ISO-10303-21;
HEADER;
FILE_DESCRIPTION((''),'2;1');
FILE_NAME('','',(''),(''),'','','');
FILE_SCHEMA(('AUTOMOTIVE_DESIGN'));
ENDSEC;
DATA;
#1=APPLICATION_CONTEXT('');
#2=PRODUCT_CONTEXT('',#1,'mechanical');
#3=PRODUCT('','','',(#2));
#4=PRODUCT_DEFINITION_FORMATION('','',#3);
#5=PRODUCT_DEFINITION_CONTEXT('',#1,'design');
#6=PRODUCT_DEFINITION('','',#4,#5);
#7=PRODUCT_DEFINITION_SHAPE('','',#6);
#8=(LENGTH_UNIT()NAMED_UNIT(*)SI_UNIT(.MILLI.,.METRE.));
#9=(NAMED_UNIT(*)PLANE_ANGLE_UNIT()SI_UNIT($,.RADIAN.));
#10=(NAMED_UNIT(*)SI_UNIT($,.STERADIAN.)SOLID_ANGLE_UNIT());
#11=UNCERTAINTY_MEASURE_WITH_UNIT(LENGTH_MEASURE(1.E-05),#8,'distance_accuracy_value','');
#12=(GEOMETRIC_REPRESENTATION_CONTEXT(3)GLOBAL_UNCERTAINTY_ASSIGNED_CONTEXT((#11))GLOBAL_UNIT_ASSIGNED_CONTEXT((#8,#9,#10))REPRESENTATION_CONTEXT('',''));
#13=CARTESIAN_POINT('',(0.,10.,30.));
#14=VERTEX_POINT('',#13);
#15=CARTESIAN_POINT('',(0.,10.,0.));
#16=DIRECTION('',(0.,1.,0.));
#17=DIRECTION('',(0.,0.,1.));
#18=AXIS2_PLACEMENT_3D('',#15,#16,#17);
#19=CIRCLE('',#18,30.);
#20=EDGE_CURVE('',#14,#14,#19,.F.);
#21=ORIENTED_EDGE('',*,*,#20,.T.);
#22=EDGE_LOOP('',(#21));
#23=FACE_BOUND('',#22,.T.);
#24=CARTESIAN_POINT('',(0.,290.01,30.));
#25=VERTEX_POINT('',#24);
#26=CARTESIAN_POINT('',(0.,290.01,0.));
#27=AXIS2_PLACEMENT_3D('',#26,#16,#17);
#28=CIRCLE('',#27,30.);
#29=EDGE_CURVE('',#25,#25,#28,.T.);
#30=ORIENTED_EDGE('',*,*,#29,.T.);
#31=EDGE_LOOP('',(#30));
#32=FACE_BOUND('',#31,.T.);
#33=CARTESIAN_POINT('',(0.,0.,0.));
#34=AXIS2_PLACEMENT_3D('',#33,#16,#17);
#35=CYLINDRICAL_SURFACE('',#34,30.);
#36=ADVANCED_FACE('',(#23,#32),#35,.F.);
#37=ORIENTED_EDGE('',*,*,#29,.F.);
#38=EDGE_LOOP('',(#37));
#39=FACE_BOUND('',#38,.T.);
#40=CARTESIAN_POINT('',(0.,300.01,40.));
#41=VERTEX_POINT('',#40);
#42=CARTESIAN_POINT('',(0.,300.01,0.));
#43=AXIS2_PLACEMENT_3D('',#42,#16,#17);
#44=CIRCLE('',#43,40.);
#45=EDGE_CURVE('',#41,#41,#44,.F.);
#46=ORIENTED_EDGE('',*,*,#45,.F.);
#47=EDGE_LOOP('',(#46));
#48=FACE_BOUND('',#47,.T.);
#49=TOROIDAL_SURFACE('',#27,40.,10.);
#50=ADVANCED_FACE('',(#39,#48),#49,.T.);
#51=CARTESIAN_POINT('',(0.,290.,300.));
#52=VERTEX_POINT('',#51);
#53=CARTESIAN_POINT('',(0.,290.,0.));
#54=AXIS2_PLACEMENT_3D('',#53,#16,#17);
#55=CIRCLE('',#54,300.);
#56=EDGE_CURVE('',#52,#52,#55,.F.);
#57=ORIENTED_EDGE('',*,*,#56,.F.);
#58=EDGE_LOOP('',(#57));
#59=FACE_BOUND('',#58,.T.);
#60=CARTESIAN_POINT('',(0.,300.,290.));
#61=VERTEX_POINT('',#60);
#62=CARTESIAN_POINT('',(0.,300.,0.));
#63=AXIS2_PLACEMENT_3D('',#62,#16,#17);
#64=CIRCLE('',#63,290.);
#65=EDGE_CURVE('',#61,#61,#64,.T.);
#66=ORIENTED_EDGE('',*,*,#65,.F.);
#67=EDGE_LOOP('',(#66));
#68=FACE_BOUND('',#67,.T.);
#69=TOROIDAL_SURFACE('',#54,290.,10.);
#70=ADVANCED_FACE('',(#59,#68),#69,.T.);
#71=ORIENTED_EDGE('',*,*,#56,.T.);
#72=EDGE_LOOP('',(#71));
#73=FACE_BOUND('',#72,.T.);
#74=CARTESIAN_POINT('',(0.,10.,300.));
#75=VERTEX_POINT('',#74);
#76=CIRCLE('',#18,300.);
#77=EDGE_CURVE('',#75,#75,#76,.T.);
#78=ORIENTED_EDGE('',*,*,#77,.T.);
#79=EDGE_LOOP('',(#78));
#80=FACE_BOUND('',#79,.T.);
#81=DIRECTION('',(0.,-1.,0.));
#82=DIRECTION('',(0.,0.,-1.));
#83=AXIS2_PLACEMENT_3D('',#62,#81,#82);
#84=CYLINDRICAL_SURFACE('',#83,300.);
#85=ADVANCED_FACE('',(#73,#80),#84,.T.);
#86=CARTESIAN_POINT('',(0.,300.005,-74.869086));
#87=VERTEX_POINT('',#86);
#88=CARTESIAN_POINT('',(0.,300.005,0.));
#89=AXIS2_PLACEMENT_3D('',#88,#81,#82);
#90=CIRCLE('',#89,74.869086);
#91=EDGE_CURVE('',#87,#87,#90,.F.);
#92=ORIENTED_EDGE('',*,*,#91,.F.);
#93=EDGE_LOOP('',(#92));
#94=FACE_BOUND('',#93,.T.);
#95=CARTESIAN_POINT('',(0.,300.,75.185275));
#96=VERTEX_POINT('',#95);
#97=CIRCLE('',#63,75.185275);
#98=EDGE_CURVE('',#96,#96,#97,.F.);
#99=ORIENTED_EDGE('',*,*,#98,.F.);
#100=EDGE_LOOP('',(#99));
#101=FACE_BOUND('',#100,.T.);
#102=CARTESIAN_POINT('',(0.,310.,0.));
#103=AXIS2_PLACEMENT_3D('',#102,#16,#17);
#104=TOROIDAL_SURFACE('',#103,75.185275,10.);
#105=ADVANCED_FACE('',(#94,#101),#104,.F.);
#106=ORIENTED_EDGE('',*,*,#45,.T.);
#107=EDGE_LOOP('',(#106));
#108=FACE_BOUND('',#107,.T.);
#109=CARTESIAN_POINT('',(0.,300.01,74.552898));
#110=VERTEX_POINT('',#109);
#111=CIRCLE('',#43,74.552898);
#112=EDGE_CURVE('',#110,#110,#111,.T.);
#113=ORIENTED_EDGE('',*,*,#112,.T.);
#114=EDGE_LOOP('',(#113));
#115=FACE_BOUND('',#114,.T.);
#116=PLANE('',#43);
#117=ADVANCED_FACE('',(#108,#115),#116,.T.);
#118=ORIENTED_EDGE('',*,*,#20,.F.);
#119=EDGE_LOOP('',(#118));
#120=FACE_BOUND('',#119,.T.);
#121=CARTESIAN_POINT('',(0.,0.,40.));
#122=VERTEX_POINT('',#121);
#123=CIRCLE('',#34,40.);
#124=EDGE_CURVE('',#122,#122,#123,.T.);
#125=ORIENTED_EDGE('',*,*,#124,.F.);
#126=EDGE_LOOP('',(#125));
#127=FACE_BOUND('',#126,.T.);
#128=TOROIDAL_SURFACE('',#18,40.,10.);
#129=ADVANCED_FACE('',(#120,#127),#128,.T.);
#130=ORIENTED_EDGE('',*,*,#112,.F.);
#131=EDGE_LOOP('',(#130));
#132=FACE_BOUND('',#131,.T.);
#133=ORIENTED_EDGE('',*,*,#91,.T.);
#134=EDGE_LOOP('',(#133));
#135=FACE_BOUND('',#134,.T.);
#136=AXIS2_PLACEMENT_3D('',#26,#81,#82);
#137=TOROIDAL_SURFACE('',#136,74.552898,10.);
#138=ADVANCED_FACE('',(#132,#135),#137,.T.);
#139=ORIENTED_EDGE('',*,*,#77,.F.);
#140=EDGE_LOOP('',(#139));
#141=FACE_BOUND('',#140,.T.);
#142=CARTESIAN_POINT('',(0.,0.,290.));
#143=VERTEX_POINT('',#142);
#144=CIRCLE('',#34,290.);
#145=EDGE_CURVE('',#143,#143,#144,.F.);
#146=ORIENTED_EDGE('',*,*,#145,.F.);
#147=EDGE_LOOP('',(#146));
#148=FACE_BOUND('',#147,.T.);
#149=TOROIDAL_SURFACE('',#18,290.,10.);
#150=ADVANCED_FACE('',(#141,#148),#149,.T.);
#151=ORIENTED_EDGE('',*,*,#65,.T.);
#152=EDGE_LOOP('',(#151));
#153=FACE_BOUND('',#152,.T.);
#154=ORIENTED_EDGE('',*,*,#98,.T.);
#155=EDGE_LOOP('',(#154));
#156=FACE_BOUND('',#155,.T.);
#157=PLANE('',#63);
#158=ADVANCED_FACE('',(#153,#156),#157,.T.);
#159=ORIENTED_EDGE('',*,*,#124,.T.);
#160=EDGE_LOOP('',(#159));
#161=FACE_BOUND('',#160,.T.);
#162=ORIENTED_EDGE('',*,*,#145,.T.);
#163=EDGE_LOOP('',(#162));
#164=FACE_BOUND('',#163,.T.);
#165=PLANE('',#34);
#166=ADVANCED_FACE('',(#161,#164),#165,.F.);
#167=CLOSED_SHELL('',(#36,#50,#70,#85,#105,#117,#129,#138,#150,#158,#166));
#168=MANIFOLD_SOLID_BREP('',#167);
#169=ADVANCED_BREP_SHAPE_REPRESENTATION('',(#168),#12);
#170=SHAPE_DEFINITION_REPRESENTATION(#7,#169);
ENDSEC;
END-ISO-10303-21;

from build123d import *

# Parameters (mm, degrees)
SKETCH1_R                = 300.00000000000006
SKETCH1_R_2              = 75.00000000000001
BOSS_EXTRUDE2_DEPTH      = 300
BOSS_EXTRUDE3_DEPTH      = 0.01
BOSS_EXTRUDE3_DEPTH_BACK = 300
SKETCH2_R                = 75.00000000000003
CUT_EXTRUDE1_DEPTH       = 520.6210158375045
CUT_EXTRUDE1_DEPTH_BACK  = 520.6210158375045
SKETCH3_R                = 30
FILLET1_R                = 10
FILLET2_R                = 10
FILLET3_R                = 10


with BuildPart() as part:
    # Sketch1 → Boss-Extrude2 (new body)
    with BuildSketch(Plane(origin=(0, 0, 0), x_dir=(1, 0, 0), z_dir=(0, 1, 0))):
        with Locations(Location((0, 0, 0), (0, 0, 270))):
            Circle(SKETCH1_R)
        with Locations(Location((0, 0, 0), (0, 0, 270))):
            Circle(SKETCH1_R_2, mode=Mode.SUBTRACT)
    extrude(amount=BOSS_EXTRUDE2_DEPTH)

    # Sketch2 → Boss-Extrude3 (add, two sides: drawn at the far end of the back side and taken through both)
    with BuildSketch(Plane(origin=(0, 300, 0), x_dir=(1, 0, 0), z_dir=(0, 1, 0)).offset(-BOSS_EXTRUDE3_DEPTH_BACK)):
        with Locations(Location((0, 0, 0), (0, 0, 270))):
            Circle(SKETCH2_R)
    extrude(amount=BOSS_EXTRUDE3_DEPTH + BOSS_EXTRUDE3_DEPTH_BACK)

    # Sketch3 → Cut-Extrude1 (cut, two sides: drawn at the far end of the back side and taken through both)
    with BuildSketch(Plane(origin=(0, 300.01, 0), x_dir=(1, 0, 0), z_dir=(0, 1, 0)).offset(-CUT_EXTRUDE1_DEPTH_BACK)):
        with Locations(Location((0, 0, 0), (0, 0, 270))):
            Circle(SKETCH3_R)
    extrude(amount=CUT_EXTRUDE1_DEPTH + CUT_EXTRUDE1_DEPTH_BACK, mode=Mode.SUBTRACT)

    # Fillet1
    # the kernel refuses this fillet: 10 mm, written as the material it takes off along each edge
    with BuildSketch(Plane(origin=(0, 300.01, 0), x_dir=(-1.8e-16, 0, 1), z_dir=(-1, 0, -1.8e-16))) as fillet1_piece_1:
        with BuildLine():
            CenterArc((74.55289822187787, -10), FILLET1_R, 87.43744126687696, 2.5625587331230406)
            Line((74.55289822187787, 0), (75.00000000000003, 0))
            Line((75.00000000000003, 0), (75.00000000000001, -0.00999999999999091))
        make_face()
    revolve(axis=Axis((0, 300.01, 0), (0, 1, 0)), mode=Mode.SUBTRACT)
    with BuildSketch(Plane(origin=(0, 300.01, 0), x_dir=(-1.8e-16, 0, 1), z_dir=(-1, 0, -1.8e-16))) as fillet1_piece_2:
        with BuildLine():
            CenterArc((30 + FILLET1_R, -FILLET1_R), FILLET1_R, 90, 90)
            Line((30 + FILLET1_R, 0), (30, 0))
            Line((30, 0), (30, -FILLET1_R))
        make_face()
    revolve(axis=Axis((0, 300.01, 0), (0, 1, 0)), mode=Mode.SUBTRACT)
    with BuildSketch(Plane(origin=(0, 0, 0), x_dir=(-1.8e-16, 0, 1), z_dir=(-1, 0, -1.8e-16))) as fillet1_piece_3:
        with BuildLine():
            CenterArc((300.00000000000006 - FILLET1_R, FILLET1_R), FILLET1_R, 270, 90)
            Line((300.00000000000006 - FILLET1_R, -1.78e-15), (300.00000000000006, 0))
            Line((300.00000000000006, 0), (300.00000000000006, FILLET1_R))
        make_face()
    revolve(axis=Axis((0, 0, 0), (0, 1, 0)), mode=Mode.SUBTRACT)
    with BuildSketch(Plane(origin=(0, 300, 0), x_dir=(-1.8e-16, 0, 1), z_dir=(-1, 0, -1.8e-16))) as fillet1_piece_4:
        with BuildLine():
            CenterArc((300.00000000000006 - FILLET1_R, -FILLET1_R), FILLET1_R, 0, 90)
            Line((300.00000000000006 - FILLET1_R, 0), (300.00000000000006, 0))
            Line((300.00000000000006, 0), (300.00000000000006, -FILLET1_R))
        make_face()
    revolve(axis=Axis((0, 300, 0), (0, 1, 0)), mode=Mode.SUBTRACT)

    # Fillet2
    # the kernel refuses this fillet: 10 mm, written as the material it adds along each edge
    with BuildSketch(Plane(origin=(0, 300, 0), x_dir=(-1.8e-16, 0, 1), z_dir=(-1, 0, -1.8e-16))) as fillet2_piece_1:
        with BuildLine():
            CenterArc((75.18527469203002, 10), FILLET2_R, 268.1880728619216, 1.8119271380783744)
            ThreePointArc((74.86908645695401, 0.00499999999999545), (74.93455141662679, 0.00271438793976131), (75.00000000000001, 0))
            Line((75.00000000000001, 0), (75.18527469203002, 0))
        make_face()
    revolve(axis=Axis((0, 300, 0), (0, 1, 0)))

    # Fillet3
    fillet3_edges = [part.edges().sort_by_distance(p)[0] for p in [
        (2.251e-14, 0, -30),
    ]]
    fillet(fillet3_edges, radius=FILLET3_R)


solid = part.part
